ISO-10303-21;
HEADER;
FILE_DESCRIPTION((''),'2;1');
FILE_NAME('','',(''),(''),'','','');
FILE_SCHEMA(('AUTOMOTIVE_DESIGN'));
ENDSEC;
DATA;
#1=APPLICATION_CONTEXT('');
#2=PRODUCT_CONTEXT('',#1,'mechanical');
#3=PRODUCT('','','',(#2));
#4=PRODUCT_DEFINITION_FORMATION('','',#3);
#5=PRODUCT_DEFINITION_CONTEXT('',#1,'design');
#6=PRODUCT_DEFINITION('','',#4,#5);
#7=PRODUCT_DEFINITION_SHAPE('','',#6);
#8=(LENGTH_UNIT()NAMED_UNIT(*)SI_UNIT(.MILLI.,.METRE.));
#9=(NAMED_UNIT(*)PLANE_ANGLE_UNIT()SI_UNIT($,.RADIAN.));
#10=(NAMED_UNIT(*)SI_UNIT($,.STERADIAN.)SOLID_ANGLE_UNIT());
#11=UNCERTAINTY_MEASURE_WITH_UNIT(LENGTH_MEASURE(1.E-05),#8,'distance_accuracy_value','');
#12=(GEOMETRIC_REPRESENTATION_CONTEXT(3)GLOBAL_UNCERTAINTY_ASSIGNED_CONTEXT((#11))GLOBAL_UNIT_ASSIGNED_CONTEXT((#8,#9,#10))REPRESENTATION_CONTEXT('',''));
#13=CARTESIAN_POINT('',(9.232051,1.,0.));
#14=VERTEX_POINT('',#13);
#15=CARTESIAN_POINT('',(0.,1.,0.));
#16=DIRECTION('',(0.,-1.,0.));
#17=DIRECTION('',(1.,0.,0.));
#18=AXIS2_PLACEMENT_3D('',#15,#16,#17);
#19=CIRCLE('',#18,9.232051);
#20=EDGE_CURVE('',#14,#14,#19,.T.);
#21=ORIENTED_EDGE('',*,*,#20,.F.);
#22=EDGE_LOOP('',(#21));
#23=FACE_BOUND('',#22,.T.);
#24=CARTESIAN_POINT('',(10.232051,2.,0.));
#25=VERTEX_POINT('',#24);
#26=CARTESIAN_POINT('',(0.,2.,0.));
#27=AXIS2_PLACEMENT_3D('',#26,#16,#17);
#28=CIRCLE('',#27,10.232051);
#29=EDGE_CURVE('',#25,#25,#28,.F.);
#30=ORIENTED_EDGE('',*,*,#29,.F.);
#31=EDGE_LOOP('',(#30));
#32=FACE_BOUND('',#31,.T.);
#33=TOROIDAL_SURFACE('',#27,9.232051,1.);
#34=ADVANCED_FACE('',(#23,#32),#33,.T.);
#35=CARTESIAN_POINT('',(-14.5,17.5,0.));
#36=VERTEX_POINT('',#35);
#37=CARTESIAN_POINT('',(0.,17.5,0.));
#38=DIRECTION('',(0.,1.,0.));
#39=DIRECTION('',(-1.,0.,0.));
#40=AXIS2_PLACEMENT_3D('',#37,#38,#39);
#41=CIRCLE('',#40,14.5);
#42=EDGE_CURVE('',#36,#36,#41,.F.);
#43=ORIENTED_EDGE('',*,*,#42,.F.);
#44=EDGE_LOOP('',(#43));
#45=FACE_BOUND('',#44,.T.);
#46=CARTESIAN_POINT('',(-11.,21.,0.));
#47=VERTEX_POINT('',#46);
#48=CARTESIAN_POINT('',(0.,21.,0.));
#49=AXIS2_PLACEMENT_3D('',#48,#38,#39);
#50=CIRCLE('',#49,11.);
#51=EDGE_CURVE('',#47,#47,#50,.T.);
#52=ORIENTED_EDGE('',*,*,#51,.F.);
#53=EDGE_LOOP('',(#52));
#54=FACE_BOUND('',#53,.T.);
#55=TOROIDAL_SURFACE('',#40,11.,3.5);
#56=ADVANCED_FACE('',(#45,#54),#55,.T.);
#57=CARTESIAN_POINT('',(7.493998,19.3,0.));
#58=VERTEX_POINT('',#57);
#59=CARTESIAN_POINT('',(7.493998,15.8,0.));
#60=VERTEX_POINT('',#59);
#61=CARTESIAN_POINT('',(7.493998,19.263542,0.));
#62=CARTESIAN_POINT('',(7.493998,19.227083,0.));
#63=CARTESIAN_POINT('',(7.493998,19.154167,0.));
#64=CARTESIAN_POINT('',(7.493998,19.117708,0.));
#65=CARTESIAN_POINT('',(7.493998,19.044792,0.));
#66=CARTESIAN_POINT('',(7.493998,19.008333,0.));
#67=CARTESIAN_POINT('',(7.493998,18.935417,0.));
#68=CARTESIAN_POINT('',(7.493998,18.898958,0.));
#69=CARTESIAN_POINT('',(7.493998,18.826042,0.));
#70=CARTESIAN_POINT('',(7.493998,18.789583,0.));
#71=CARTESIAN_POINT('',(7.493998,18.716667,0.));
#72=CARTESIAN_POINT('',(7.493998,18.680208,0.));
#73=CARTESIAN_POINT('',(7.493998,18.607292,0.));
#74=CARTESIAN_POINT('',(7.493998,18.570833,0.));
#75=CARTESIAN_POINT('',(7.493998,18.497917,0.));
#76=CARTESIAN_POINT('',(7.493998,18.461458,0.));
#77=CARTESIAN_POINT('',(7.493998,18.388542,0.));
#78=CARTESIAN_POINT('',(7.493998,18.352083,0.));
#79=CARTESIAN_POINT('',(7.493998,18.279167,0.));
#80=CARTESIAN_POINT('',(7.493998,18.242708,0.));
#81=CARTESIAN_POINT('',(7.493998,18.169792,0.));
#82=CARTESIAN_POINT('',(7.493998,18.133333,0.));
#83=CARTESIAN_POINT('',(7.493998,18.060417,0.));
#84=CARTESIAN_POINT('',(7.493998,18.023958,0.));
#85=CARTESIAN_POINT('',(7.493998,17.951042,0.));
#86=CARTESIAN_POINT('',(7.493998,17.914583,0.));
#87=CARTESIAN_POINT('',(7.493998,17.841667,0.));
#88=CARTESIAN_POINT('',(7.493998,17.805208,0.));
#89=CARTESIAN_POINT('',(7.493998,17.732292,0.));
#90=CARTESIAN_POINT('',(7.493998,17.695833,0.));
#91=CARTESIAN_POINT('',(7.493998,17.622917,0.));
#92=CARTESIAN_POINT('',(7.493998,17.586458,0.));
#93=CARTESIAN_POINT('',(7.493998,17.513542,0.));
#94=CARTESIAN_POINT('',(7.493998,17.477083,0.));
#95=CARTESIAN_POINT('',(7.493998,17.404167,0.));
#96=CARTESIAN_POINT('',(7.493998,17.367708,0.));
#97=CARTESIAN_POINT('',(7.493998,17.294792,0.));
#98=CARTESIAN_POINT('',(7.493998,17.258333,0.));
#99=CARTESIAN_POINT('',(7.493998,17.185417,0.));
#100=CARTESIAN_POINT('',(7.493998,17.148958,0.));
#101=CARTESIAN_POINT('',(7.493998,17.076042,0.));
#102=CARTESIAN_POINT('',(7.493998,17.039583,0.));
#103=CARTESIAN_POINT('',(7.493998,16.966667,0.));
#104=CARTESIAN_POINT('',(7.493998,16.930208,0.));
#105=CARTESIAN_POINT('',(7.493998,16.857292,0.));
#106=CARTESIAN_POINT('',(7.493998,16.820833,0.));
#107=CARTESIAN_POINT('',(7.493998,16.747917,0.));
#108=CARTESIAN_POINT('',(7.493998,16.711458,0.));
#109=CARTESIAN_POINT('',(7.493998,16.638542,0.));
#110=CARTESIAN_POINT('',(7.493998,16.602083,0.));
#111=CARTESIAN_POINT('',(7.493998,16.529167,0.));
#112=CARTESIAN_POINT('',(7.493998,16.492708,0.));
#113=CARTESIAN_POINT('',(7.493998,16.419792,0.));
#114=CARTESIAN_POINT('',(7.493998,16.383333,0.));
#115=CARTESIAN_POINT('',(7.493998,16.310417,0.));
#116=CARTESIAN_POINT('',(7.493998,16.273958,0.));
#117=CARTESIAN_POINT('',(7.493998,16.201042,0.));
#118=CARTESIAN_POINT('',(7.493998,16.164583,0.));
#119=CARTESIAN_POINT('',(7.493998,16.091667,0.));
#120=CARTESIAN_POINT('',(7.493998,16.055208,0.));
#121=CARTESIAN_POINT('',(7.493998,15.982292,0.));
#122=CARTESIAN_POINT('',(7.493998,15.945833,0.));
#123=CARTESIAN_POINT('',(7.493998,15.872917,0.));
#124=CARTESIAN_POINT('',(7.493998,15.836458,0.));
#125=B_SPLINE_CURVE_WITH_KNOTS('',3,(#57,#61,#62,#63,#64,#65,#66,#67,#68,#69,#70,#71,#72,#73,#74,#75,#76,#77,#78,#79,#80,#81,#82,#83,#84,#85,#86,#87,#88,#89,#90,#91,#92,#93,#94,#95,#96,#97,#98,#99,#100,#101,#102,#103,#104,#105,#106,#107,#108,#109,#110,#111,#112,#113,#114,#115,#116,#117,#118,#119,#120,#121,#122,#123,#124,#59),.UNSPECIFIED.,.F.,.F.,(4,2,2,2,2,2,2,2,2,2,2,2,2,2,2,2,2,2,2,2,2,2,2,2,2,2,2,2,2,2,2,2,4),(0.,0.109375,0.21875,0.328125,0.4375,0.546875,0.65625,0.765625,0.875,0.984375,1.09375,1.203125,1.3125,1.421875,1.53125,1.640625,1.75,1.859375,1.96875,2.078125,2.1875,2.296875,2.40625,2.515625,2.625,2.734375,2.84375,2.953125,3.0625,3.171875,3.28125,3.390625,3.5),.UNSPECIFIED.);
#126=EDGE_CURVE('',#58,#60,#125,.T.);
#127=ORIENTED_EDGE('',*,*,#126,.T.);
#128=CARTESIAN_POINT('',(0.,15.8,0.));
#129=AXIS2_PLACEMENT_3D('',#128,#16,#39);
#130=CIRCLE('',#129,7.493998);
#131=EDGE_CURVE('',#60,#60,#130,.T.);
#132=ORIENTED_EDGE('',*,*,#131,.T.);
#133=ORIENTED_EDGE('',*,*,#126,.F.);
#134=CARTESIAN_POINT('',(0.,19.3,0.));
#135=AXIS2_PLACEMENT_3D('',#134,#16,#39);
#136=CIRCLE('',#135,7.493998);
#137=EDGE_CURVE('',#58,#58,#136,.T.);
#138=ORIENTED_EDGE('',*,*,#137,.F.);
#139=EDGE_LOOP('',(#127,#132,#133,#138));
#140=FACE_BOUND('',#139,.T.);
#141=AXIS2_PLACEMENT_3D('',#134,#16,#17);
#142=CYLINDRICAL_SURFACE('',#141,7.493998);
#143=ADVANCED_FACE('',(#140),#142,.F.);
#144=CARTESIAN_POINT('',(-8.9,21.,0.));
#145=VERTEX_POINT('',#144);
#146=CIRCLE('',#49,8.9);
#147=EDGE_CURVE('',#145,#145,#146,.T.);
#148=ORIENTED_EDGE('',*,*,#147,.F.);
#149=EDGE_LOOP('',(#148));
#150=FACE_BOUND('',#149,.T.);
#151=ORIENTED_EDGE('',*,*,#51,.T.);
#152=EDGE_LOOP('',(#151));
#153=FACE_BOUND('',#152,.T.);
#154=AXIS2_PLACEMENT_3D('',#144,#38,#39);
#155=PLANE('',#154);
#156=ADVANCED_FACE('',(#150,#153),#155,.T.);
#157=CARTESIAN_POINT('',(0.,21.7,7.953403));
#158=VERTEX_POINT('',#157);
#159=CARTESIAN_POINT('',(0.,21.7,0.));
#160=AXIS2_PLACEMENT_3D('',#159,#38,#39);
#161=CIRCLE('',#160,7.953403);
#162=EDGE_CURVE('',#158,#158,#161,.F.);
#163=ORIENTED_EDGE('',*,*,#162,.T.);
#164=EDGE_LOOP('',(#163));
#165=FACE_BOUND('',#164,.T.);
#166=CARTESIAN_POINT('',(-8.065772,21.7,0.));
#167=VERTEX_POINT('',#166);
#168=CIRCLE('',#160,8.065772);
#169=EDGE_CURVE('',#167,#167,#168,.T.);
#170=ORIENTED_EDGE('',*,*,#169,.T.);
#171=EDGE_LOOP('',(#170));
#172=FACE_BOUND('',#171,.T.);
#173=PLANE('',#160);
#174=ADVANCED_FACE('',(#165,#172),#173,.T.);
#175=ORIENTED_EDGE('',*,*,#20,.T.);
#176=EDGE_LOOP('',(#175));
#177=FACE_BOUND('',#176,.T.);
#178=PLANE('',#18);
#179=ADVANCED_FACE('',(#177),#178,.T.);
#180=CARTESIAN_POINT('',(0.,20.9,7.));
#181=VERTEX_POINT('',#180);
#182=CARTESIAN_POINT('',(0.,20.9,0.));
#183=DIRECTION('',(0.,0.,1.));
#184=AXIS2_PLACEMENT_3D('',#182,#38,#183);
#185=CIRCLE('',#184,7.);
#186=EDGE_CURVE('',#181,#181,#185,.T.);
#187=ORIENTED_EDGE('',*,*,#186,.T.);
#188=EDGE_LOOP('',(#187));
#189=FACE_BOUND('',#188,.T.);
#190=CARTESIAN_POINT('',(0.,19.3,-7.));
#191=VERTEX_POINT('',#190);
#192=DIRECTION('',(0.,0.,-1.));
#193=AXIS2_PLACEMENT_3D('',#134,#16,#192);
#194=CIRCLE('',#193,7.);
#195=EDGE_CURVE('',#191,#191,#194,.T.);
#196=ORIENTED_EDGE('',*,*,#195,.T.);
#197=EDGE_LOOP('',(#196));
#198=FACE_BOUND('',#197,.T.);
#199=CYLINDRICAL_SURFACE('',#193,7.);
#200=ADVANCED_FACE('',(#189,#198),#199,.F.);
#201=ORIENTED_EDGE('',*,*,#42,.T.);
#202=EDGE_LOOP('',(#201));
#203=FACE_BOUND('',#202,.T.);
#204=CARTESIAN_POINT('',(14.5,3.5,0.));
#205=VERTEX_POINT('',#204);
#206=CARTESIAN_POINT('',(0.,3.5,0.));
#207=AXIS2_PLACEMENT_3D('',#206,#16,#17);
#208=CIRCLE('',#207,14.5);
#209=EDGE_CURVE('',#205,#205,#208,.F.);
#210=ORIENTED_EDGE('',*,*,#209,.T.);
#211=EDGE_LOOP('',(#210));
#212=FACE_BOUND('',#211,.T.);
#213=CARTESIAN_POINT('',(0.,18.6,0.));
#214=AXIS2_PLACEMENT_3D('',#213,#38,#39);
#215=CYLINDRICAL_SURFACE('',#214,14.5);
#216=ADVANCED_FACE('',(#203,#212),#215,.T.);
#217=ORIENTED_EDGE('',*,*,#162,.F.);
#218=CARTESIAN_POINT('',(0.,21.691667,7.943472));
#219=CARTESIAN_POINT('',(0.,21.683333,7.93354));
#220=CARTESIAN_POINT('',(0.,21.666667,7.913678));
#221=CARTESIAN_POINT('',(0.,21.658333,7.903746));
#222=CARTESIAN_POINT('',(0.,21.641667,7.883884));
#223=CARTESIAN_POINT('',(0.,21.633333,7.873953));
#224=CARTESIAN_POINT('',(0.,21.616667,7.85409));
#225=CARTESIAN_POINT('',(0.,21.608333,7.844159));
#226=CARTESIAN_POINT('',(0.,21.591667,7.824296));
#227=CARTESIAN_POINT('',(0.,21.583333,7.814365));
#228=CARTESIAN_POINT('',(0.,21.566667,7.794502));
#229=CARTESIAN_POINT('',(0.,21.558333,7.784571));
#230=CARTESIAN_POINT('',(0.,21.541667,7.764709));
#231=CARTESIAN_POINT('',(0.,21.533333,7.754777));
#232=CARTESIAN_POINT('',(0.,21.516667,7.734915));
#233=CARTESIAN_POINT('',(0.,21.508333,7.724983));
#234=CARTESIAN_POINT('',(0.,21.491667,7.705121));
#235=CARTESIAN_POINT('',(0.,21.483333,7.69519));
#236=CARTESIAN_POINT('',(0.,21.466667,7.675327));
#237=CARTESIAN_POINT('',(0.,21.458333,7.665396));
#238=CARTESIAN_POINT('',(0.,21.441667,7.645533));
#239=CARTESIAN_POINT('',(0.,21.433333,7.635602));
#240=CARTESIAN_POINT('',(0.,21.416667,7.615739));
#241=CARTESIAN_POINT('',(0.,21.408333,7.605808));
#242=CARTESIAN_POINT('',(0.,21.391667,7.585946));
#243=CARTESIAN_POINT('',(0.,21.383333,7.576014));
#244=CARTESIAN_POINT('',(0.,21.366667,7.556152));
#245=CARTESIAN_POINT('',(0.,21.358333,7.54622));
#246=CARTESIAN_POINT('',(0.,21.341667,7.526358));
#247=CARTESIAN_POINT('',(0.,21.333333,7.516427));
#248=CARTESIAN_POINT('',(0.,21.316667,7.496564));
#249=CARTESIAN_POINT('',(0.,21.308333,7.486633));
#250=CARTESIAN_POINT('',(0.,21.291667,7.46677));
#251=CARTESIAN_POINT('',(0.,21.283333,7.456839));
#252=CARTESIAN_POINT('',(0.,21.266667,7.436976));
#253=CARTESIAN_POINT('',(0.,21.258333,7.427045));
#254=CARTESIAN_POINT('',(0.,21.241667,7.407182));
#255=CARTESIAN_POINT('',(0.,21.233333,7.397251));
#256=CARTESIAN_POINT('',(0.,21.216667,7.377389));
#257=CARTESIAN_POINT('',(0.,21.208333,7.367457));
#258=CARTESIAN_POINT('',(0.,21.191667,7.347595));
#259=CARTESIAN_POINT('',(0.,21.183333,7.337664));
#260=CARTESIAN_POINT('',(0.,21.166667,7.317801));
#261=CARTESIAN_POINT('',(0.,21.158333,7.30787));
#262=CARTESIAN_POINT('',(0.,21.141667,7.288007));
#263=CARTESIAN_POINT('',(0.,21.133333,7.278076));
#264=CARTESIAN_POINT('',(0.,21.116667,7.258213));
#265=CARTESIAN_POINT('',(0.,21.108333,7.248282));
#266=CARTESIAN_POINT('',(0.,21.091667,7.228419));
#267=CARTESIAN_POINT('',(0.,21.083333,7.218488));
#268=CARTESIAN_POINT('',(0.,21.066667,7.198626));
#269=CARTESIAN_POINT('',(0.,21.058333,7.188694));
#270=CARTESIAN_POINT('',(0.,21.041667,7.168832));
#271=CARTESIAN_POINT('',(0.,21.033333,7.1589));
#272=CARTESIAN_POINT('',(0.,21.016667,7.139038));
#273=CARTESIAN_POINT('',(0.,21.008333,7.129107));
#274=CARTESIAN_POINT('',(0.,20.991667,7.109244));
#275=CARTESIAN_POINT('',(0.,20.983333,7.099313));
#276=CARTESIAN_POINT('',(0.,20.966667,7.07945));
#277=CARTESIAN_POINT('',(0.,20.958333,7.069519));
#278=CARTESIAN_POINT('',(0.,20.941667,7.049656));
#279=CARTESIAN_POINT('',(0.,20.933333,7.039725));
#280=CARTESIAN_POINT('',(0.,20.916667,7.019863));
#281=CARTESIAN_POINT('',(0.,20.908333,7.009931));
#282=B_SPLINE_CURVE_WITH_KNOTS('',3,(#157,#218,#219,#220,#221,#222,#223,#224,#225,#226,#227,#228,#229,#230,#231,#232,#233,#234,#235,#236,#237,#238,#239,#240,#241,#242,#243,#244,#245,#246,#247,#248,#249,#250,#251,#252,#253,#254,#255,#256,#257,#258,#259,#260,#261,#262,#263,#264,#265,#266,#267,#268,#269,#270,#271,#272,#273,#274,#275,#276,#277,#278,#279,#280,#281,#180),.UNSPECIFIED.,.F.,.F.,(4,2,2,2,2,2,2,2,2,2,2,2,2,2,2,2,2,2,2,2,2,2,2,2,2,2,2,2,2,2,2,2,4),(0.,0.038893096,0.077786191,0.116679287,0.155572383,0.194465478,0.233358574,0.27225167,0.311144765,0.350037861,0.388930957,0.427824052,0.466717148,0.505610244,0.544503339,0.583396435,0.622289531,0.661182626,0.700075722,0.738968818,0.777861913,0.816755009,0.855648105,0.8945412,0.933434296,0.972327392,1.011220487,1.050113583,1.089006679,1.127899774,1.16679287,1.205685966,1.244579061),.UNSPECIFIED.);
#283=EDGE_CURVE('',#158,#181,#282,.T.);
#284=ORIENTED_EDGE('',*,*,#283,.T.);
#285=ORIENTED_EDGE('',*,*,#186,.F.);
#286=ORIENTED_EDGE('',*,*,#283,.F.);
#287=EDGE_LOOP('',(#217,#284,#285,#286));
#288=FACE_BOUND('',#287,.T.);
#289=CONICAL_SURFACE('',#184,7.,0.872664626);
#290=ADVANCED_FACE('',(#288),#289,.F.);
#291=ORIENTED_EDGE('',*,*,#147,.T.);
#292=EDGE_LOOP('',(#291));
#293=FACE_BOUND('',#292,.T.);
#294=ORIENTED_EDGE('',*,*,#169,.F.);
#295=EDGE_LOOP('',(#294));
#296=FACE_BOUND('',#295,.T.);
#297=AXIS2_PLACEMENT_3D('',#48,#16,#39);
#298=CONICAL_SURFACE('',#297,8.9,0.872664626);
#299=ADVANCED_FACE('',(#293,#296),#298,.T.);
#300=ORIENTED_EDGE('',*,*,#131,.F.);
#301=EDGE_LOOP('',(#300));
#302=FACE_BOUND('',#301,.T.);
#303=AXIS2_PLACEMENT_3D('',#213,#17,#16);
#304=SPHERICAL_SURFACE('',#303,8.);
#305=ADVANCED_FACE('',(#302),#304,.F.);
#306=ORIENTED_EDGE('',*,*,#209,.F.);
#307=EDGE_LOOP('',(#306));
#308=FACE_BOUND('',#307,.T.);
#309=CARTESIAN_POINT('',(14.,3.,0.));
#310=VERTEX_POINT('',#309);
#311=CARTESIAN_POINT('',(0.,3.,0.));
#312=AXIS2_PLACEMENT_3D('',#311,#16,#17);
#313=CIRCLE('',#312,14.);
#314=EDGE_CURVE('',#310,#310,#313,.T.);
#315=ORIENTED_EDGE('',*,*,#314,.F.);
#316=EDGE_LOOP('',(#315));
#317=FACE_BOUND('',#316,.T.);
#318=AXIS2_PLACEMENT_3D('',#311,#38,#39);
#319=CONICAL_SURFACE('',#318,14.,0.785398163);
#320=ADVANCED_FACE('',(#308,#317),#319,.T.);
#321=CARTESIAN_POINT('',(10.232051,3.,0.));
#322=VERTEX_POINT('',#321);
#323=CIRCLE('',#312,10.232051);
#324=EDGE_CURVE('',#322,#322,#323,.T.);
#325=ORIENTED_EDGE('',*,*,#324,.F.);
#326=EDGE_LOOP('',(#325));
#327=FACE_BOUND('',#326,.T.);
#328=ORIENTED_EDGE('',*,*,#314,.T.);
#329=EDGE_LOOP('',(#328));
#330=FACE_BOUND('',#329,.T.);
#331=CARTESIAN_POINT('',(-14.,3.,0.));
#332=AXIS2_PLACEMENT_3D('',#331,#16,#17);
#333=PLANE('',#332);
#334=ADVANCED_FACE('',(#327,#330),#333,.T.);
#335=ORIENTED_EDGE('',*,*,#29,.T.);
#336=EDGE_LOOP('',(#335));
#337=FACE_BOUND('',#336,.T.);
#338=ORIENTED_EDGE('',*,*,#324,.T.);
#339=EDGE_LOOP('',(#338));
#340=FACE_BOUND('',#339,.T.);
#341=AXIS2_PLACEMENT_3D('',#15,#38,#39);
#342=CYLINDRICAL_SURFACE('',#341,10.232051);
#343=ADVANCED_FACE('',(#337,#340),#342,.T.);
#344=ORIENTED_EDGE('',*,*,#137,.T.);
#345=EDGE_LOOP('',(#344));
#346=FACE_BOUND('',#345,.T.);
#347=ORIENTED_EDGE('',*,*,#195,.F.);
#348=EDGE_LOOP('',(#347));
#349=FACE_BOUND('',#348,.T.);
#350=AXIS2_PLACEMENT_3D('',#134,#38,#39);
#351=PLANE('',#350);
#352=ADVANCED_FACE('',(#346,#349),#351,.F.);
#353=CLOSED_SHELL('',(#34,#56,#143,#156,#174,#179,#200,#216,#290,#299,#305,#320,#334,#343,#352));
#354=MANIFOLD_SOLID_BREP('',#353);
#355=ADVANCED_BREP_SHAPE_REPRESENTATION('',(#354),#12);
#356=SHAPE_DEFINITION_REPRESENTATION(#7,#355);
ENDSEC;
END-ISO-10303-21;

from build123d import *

# Parameters (mm, degrees)
SKETCH2_R                      = 8.9
BOSS_EXTRUDE1_DEPTH            = 0.7
BOSS_EXTRUDE1_TAPER            = 50
F_14_0_14_DIAMETER_HOLE1_D     = 14
F_14_0_14_DIAMETER_HOLE1_DEPTH = 2.4
SKETCH5_R                      = 10.232050808
BOSS_EXTRUDE2_DEPTH            = 2
CHAMFER1_SIZE                  = 0.5
CHAMFER2_SIZE                  = 0.953402874
CHAMFER2_SIZE2                 = 0.8
FILLET1_R                      = 1
FILLET2_R                      = 3.5


with BuildPart() as part:
    # Cut-Extrude1: read off the stored shape, not the designer's step
    # Cut-Extrude1 outline → Cut-Extrude1 (revolve)
    with BuildSketch(Plane.XY):
        with BuildLine():
            Line((0, 10.6), (0, 3))
            Line((0, 3), (14.5, 3))
            Line((14.5, 3), (14.5, 21))
            Line((14.5, 21), (0, 21))
            Line((0, 21), (0, 19.3))
            Line((0, 19.3), (7.493997598, 19.3))
            Line((7.493997598, 19.3), (7.493997598, 15.8))
            ThreePointArc((7.493997598, 15.8), (4.5607017, 12.02732931), (0, 10.6))
        make_face()
    revolve(axis=Axis((0, 0, 0), (0, 1, 0)))

    # Sketch2 → Boss-Extrude1 (add)
    with BuildSketch(Plane(origin=(0, 21, 0), x_dir=(-1, 0, 0), z_dir=(0, 1, 0))):
        Circle(SKETCH2_R)
    extrude(amount=BOSS_EXTRUDE1_DEPTH, taper=BOSS_EXTRUDE1_TAPER)

    # Ø14.0 (14) Diameter Hole1
    with Locations(Plane.XZ.offset(-19.3)):
        with Locations((0, 0)):
            Hole(F_14_0_14_DIAMETER_HOLE1_D / 2, depth=F_14_0_14_DIAMETER_HOLE1_DEPTH)

    # Sketch5 → Boss-Extrude2 (add)
    with BuildSketch(Plane.XZ.offset(-3)):
        Circle(SKETCH5_R)
    extrude(amount=BOSS_EXTRUDE2_DEPTH)

    # Chamfer1
    chamfer1_edges = [part.edges().sort_by_distance(p)[0] for p in [
        (-14.5, 3, 0),
    ]]
    chamfer(chamfer1_edges, length=CHAMFER1_SIZE)

    # Chamfer2
    chamfer2_edges = [part.edges().sort_by_distance(p)[0] for p in [
        (7, 21.7, 0),
    ]]
    chamfer2_side = [part.faces().sort_by_distance(p)[0] for p in [
        (7.837637988, 21.7, 0),
    ]]
    chamfer(chamfer2_edges, length=CHAMFER2_SIZE, length2=CHAMFER2_SIZE2, reference=chamfer2_side[0])

    # Fillet1
    fillet1_edges = [part.edges().sort_by_distance(p)[0] for p in [
        (-10.232050808, 1, 0),
    ]]
    fillet(fillet1_edges, radius=FILLET1_R)

    # Fillet2
    fillet2_edges = [part.edges().sort_by_distance(p)[0] for p in [
        (-14.5, 21, 0),
    ]]
    fillet(fillet2_edges, radius=FILLET2_R)


solid = part.part
